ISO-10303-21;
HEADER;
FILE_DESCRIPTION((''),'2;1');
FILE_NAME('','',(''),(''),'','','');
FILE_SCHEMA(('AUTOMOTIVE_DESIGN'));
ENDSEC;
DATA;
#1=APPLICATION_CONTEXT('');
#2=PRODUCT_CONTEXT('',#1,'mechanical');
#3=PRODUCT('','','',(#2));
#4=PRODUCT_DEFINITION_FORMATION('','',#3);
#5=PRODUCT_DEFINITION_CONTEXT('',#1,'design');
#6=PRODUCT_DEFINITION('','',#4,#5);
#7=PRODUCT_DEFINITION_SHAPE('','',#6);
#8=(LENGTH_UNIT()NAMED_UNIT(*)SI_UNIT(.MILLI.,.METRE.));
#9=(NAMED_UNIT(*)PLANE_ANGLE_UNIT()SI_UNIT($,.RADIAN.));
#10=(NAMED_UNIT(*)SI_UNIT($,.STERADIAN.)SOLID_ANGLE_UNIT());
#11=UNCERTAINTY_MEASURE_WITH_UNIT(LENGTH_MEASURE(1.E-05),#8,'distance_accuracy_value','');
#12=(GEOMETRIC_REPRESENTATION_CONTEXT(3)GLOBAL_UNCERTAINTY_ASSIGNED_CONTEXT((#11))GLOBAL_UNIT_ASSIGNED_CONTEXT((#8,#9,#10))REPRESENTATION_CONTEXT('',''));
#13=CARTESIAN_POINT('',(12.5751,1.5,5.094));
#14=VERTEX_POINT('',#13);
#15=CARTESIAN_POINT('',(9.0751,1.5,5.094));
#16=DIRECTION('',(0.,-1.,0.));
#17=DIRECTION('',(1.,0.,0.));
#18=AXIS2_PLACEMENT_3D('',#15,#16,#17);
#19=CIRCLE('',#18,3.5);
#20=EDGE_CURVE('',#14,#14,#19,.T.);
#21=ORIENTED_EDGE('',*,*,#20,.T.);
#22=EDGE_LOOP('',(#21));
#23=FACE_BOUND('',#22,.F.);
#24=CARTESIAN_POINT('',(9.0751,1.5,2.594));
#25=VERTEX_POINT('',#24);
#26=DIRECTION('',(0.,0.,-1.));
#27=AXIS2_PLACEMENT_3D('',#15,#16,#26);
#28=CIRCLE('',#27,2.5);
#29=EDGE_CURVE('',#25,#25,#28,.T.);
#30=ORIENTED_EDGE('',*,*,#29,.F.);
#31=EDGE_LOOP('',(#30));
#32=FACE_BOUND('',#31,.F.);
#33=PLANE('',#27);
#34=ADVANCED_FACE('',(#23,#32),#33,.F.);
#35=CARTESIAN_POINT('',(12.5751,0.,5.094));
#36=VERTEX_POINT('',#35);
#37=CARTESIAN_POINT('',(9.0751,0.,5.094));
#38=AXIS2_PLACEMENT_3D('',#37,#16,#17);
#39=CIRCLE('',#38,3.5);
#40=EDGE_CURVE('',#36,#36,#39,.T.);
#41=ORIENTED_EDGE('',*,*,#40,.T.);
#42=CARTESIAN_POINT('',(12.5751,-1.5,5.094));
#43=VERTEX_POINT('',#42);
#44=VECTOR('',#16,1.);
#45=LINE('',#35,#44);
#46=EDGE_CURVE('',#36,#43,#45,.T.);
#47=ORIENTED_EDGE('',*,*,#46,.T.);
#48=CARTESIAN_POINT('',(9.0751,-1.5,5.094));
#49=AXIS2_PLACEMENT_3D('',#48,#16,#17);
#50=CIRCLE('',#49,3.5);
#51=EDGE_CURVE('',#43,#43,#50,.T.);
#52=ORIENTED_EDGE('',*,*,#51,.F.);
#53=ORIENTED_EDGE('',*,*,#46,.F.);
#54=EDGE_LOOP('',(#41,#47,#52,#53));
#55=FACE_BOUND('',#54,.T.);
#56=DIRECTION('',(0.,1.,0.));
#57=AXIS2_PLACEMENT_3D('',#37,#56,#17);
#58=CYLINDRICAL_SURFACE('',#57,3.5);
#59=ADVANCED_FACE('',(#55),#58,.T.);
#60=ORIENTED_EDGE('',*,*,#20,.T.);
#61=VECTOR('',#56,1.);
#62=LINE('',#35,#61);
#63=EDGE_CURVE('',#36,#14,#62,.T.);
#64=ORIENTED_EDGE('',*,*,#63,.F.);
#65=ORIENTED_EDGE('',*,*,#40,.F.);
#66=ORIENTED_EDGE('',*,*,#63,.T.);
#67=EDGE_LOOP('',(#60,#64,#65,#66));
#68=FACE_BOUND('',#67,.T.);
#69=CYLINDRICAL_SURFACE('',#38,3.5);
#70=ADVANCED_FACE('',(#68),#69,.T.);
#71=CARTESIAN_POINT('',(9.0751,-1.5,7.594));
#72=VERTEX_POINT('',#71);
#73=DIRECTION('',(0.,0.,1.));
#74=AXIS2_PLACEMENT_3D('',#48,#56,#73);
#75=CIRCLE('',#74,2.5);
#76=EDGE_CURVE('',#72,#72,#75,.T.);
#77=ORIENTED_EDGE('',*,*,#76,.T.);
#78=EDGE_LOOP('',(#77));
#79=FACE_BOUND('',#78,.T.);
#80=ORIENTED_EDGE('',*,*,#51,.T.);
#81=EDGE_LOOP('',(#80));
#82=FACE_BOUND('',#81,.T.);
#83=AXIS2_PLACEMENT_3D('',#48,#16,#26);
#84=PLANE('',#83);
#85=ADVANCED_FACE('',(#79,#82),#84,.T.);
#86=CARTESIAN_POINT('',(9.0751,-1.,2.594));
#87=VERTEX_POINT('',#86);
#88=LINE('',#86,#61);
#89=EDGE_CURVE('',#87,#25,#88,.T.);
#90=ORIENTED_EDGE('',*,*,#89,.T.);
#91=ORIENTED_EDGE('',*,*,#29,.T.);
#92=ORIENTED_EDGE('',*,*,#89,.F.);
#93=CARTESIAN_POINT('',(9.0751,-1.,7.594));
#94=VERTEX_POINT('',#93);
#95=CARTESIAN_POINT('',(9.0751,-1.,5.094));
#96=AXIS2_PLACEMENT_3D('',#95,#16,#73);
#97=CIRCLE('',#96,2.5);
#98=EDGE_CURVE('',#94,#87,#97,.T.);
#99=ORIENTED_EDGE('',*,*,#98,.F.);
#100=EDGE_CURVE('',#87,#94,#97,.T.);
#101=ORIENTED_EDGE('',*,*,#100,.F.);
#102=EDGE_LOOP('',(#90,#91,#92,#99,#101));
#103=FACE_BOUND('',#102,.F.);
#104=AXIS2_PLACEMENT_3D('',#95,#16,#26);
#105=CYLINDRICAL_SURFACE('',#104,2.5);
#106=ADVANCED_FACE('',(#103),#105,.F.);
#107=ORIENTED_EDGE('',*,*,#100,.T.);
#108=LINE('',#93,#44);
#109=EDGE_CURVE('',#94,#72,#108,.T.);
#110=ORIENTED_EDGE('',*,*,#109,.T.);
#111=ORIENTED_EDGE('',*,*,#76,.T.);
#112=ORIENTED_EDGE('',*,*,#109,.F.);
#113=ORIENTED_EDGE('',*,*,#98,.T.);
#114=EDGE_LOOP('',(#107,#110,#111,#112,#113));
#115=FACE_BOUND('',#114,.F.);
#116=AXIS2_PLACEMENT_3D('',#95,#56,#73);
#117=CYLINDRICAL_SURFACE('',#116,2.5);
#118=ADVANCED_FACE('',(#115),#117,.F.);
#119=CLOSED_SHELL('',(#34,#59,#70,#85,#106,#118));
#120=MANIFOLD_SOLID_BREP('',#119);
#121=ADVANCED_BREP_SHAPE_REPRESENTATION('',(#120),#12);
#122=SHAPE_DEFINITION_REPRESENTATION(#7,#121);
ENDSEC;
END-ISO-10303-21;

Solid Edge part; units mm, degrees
sketch "Sketch1" plane through (9.0751, 0, 5.094) normal (0, -1, 0) x (1, 0, 0)
  circle A0 centre (0, 0) radius 3.5
extrude "ExtrudedProtrusion_1" add sketch "Sketch1" along normal mid plane 3
hole "Hole1" at (9.0751, -1, 5.094) direction (0, -1, 0) diameter 5 end through all both ways yes
